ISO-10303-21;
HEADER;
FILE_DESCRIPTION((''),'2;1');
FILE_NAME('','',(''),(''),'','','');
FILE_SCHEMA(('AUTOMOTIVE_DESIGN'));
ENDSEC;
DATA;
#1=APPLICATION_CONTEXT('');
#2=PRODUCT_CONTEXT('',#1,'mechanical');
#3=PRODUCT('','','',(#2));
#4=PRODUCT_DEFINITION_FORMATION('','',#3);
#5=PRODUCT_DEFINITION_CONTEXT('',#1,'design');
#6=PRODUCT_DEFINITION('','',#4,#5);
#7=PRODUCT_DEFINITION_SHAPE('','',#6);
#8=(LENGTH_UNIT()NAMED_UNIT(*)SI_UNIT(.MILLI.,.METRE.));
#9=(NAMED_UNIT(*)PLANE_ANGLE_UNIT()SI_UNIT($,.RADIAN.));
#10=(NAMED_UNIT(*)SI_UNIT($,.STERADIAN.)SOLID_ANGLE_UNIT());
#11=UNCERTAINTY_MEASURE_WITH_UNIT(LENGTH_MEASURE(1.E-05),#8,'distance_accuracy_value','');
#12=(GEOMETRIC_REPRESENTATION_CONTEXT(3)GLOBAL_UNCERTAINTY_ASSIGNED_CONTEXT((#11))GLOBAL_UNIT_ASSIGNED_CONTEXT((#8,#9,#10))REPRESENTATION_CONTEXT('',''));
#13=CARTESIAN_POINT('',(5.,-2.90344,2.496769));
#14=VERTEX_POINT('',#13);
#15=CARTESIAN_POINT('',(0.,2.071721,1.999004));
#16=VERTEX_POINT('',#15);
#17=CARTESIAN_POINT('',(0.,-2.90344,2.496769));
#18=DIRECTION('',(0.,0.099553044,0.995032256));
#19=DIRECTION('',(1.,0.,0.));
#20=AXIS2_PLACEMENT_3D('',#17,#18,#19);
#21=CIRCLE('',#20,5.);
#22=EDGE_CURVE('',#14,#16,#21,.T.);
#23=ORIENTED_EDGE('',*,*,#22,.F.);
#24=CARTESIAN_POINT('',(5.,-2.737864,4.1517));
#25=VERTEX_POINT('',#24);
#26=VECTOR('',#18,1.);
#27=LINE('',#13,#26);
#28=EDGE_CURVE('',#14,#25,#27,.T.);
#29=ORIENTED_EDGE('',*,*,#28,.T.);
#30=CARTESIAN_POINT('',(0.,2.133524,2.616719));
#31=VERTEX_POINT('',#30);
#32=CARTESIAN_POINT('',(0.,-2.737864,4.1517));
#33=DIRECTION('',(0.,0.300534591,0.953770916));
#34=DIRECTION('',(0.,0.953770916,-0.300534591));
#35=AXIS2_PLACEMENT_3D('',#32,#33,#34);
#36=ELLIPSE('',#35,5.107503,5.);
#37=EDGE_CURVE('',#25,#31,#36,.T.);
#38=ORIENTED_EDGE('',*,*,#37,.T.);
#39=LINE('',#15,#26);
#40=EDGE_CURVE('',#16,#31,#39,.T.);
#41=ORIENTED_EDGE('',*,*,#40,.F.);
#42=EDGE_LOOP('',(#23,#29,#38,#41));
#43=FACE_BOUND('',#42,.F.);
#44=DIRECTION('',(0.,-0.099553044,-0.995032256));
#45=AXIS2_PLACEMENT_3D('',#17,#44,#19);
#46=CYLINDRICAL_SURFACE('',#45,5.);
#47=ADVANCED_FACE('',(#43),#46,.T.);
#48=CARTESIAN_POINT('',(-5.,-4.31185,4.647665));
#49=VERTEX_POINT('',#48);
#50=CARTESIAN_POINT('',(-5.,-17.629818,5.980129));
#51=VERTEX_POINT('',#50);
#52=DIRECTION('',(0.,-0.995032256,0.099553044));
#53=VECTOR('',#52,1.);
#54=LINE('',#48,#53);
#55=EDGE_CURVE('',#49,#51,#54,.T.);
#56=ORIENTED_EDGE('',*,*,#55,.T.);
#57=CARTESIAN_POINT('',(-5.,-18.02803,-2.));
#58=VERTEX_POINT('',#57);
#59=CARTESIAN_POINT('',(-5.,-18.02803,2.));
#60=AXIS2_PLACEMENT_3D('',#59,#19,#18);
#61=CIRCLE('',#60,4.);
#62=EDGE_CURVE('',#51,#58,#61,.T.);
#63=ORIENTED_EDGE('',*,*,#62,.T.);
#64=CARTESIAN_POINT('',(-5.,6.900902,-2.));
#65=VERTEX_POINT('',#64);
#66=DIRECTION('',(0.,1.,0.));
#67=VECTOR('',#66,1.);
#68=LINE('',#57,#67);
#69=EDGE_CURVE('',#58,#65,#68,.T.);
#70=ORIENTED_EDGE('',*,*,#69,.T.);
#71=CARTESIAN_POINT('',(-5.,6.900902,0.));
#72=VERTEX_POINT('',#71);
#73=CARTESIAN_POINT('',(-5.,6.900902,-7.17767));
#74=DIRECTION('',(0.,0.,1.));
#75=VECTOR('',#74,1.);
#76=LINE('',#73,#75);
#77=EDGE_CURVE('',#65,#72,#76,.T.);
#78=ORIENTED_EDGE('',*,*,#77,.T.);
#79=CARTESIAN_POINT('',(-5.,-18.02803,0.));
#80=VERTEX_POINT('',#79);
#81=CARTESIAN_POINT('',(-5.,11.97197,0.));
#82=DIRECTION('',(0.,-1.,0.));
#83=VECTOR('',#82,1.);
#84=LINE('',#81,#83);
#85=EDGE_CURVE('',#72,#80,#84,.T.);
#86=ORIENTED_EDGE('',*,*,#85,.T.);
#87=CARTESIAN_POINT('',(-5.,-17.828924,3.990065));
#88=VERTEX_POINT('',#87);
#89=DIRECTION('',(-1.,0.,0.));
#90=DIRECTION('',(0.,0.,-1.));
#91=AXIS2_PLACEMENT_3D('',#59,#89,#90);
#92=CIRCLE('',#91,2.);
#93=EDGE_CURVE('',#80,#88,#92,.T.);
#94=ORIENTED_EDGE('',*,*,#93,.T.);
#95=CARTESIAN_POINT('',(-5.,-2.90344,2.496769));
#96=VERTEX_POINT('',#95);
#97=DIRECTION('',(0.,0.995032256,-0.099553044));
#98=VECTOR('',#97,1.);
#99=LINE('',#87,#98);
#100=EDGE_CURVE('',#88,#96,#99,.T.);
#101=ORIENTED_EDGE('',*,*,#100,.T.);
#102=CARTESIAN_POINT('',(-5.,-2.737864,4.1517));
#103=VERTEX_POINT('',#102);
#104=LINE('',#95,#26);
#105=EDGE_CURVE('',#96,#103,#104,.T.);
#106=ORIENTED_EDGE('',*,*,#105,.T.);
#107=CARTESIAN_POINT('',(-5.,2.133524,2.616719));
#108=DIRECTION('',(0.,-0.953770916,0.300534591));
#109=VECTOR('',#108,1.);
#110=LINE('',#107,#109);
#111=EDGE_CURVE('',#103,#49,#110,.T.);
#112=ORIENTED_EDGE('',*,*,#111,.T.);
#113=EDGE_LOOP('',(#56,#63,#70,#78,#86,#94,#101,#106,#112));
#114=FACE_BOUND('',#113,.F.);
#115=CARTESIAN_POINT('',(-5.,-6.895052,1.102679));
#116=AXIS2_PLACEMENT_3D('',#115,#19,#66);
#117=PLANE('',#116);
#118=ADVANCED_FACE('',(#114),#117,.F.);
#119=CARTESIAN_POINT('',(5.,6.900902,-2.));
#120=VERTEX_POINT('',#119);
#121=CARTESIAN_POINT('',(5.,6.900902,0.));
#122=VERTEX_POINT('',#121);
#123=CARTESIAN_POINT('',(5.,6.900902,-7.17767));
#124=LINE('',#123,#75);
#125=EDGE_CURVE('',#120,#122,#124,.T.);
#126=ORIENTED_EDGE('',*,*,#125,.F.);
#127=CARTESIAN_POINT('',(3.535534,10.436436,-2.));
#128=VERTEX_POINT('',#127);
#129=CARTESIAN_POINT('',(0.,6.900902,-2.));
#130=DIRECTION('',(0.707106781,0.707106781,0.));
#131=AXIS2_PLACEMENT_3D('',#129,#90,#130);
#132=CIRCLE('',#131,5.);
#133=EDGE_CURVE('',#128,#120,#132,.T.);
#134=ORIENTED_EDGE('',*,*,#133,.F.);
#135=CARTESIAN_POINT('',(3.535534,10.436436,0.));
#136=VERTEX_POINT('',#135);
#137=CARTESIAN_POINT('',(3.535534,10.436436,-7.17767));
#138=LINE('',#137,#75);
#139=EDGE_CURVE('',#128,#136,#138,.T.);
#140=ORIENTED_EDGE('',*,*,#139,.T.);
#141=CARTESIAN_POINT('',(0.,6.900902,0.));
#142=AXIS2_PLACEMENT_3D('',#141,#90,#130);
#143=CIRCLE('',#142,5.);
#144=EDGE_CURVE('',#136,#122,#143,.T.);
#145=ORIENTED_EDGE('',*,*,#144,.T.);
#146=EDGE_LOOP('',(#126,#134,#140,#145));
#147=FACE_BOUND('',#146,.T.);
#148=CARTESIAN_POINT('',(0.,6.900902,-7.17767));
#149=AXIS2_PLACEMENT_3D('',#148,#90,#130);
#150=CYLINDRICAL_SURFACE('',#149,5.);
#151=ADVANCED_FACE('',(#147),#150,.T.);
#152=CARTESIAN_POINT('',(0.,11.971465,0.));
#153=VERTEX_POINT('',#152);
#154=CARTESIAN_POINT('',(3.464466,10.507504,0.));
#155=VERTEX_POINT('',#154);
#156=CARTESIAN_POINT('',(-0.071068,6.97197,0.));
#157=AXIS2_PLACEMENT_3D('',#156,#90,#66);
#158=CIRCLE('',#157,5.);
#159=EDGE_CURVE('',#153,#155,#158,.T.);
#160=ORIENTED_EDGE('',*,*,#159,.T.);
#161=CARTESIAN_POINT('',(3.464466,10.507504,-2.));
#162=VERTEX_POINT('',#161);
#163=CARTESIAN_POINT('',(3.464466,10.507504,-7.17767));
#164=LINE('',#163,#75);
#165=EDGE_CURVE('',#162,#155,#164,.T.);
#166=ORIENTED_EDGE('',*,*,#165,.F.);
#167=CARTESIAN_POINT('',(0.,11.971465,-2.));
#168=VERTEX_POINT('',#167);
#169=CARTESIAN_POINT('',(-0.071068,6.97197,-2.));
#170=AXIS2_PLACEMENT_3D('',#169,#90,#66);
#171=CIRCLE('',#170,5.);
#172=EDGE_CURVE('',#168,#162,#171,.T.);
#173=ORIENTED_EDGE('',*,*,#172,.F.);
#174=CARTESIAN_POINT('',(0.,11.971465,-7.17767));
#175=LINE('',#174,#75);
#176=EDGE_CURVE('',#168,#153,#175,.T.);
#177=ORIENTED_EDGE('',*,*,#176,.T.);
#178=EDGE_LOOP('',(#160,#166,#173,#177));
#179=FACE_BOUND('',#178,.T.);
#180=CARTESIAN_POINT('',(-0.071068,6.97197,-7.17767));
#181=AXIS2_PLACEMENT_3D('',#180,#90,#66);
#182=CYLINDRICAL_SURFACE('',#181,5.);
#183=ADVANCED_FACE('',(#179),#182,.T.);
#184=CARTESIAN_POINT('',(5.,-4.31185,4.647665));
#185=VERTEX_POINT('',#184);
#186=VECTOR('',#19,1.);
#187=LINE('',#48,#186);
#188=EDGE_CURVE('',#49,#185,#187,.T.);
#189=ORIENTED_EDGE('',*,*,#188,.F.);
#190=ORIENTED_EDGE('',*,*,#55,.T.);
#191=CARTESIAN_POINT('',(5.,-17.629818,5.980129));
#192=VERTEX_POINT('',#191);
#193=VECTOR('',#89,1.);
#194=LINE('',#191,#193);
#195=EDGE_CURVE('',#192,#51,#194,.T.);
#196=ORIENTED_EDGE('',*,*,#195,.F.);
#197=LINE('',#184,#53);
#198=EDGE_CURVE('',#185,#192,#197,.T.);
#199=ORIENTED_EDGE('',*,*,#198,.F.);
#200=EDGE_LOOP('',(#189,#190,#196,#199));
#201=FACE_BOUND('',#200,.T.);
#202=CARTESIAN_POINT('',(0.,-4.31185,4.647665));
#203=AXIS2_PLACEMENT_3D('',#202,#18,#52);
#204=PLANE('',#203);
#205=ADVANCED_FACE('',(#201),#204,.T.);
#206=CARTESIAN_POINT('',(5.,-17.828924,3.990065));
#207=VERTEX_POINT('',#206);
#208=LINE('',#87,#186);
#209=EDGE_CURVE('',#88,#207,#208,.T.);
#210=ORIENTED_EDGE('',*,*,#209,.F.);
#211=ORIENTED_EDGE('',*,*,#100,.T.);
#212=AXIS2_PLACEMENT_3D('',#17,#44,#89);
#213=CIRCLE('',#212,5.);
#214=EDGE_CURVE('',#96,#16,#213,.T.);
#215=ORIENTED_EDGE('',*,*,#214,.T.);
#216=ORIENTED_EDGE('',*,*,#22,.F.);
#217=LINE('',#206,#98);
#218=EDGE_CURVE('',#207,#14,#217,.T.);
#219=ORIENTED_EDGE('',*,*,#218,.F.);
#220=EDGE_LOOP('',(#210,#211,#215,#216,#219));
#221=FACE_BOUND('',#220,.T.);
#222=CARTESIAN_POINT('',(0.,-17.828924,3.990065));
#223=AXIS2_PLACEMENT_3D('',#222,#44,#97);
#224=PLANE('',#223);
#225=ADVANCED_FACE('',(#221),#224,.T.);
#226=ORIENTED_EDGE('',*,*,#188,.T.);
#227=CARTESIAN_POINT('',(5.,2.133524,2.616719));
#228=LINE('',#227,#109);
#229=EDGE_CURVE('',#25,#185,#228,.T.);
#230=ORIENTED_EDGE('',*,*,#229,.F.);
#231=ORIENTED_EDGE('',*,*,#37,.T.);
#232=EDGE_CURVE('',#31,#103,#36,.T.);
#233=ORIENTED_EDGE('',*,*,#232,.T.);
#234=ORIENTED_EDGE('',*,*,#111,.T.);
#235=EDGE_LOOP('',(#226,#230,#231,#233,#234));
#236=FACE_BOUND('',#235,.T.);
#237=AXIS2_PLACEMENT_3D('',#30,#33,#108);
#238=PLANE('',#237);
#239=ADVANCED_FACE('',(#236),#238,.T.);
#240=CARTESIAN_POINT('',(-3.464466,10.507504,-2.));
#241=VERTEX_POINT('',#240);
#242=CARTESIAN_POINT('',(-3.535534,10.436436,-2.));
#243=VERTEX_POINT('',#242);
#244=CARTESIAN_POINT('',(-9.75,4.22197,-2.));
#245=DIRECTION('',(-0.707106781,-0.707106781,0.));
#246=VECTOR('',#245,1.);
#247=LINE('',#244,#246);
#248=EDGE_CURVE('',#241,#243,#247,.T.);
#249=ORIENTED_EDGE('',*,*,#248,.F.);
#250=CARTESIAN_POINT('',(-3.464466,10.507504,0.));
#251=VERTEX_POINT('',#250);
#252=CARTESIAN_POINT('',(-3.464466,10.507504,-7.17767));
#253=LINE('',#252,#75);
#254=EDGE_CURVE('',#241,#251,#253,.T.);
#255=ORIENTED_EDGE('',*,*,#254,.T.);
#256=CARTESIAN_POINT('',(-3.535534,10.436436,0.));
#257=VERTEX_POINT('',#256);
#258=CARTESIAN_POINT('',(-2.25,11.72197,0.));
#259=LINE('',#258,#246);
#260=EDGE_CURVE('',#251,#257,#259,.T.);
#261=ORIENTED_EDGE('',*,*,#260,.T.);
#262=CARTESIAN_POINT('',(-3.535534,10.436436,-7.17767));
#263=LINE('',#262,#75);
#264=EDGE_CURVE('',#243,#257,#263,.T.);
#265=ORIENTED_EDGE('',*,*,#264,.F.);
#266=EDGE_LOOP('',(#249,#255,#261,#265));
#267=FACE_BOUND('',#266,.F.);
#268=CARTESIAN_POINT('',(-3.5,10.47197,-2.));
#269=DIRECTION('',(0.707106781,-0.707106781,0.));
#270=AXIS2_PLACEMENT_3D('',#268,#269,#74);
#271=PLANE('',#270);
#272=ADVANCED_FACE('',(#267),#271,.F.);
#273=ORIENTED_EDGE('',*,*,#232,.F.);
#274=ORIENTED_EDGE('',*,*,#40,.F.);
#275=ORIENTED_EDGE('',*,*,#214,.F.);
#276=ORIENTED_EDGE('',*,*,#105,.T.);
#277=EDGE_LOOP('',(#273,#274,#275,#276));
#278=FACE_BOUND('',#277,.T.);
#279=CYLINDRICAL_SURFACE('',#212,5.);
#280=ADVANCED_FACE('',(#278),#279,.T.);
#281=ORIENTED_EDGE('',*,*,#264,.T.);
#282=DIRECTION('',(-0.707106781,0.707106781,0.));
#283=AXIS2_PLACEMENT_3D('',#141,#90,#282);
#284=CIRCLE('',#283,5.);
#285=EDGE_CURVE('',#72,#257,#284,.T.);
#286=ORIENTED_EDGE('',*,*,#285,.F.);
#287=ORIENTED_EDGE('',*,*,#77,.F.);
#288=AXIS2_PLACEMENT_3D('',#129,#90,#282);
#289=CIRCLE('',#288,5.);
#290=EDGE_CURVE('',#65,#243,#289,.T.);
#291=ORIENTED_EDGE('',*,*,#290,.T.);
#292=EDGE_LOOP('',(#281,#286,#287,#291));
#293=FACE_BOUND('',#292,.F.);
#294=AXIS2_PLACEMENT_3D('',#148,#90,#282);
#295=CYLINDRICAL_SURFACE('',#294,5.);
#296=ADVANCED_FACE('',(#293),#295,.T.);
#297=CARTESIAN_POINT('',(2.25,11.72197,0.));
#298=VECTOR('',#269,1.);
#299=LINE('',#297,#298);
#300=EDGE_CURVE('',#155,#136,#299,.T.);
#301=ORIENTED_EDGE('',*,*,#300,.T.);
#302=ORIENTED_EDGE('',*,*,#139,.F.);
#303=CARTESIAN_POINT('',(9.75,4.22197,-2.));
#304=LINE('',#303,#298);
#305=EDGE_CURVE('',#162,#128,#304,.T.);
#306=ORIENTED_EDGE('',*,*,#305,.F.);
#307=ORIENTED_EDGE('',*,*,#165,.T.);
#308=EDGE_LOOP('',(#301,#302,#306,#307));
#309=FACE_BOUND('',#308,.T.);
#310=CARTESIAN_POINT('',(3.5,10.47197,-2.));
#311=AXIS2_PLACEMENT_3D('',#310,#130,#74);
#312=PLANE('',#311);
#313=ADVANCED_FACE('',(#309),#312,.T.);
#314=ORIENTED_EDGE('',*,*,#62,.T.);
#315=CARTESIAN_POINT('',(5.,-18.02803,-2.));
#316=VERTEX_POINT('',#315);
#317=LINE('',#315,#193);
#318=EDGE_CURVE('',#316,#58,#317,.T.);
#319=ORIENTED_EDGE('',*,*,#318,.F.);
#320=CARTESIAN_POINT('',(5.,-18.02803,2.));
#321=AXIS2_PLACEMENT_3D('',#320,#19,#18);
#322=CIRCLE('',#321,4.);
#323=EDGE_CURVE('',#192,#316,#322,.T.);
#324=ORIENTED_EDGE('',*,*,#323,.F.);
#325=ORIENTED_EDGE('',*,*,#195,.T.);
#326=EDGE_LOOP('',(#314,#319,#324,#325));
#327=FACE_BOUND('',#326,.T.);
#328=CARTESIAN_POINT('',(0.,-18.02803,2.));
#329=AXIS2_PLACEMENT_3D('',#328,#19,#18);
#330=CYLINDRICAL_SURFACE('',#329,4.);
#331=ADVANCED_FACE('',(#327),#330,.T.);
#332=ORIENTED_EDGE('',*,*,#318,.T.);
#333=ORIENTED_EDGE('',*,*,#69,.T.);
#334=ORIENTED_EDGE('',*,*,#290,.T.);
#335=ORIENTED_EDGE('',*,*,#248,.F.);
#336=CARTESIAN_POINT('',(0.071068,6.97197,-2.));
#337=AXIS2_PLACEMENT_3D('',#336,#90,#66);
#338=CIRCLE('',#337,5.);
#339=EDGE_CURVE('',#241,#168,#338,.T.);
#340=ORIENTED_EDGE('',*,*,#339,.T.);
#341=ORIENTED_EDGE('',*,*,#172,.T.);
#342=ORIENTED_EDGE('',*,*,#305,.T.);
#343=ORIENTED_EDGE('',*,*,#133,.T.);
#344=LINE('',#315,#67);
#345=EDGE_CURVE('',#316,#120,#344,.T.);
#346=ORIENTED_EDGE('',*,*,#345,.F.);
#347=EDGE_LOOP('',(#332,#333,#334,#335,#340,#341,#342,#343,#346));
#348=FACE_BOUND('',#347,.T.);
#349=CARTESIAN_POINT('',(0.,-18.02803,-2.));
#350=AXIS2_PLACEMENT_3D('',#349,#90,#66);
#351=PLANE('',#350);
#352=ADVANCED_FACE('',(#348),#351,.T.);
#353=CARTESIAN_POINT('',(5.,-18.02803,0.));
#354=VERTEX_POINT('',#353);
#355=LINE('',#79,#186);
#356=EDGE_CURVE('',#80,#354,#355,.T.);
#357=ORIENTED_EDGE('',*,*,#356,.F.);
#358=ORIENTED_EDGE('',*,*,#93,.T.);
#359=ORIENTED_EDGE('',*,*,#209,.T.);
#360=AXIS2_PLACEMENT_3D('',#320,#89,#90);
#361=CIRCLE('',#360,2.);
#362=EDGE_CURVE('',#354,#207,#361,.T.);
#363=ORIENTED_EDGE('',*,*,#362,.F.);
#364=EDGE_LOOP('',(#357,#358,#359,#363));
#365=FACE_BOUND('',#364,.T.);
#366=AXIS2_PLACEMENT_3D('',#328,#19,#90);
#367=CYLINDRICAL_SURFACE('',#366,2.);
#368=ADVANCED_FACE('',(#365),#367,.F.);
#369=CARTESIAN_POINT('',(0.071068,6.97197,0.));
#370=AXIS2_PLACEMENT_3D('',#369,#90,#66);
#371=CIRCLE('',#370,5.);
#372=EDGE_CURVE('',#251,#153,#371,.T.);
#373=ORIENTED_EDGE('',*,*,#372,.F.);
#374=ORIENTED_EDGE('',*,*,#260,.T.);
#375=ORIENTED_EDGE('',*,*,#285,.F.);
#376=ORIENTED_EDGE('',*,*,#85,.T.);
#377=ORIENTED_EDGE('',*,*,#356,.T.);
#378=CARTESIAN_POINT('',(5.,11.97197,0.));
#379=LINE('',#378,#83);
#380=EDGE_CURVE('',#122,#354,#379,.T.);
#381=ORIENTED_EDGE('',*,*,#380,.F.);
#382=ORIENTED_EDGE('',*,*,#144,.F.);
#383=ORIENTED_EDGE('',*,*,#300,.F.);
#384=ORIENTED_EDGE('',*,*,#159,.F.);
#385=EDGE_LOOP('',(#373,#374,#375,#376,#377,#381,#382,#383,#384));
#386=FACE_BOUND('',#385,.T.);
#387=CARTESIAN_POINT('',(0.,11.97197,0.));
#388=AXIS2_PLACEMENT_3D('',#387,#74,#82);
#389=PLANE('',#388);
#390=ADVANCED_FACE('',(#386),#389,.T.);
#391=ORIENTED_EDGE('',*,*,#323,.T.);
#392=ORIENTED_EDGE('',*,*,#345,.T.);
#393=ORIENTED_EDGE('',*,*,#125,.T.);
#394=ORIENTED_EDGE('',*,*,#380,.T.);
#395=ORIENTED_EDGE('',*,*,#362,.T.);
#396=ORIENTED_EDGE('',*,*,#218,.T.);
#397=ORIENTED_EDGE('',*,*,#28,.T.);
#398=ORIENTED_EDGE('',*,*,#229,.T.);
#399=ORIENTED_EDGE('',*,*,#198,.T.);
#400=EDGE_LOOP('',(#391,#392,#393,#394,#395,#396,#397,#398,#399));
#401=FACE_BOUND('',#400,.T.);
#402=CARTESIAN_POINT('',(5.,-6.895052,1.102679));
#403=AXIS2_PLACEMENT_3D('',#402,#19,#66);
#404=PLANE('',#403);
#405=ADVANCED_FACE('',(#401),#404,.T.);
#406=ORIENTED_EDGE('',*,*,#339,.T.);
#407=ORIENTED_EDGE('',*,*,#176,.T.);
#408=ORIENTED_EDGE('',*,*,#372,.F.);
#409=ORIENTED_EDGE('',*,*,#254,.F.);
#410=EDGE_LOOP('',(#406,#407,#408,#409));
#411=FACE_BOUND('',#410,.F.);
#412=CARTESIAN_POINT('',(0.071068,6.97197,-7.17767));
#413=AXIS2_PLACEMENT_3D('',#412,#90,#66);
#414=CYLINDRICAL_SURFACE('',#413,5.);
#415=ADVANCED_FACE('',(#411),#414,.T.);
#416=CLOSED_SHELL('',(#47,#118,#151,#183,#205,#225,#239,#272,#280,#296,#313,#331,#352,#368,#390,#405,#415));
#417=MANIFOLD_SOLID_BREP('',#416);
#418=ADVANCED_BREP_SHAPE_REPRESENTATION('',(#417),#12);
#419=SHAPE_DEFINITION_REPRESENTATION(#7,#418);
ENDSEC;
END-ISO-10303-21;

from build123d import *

# Parameters (mm, degrees)
F1_DEPTH    = 5
F2_SIZE     = 3
F3_T1_DEPTH = 12.3553390593
F3_T3_DEPTH = 13.1207993933


# Not quite as in the source:
# - a fillet or chamfer that OpenCascade refuses, or shapes differently, is made with other operations: its cross-section is extruded or revolved along the edge and cut away or added


with BuildPart() as f1:
    # F0 (on Right) → F1 (new body, symmetric)
    with BuildSketch(Plane.YZ):
        with BuildLine():
            Line((11.971969828, -2), (11.971969828, 0))
            Line((11.971969828, 0), (-18.028030172, 0))
            ThreePointArc((-18.028030172, 0), (-20.0255447559, 2.0996769133), (-17.828924084, 3.990064513))
            Line((-17.828924084, 3.990064513), (2.0717210456, 1.9990036332))
            Line((2.0717210456, 1.9990036332), (2.1335235149, 2.6167190544))
            Line((2.1335235149, 2.6167190544), (-4.3118495071, 4.6476653855))
            Line((-4.3118495071, 4.6476653855), (-17.629817996, 5.9801290259))
            ThreePointArc((-17.629817996, 5.9801290259), (-22.0230593398, 2.1993538266), (-18.028030172, -2))
            Line((-18.028030172, -2), (11.971969828, -2))
        make_face()
    extrude(amount=F1_DEPTH, both=True)

    # F2
    f2_edges = [f1.edges().sort_by_distance(p)[0] for p in [
        (5, 11.97197, -1),
        (-5, 11.97197, -1),
    ]]
    chamfer(f2_edges, length=F2_SIZE)

    # F3: fillet of radius 5 on 6 edges, made by hand

    # F3_s2 → F3_t1 (cut)
    with BuildSketch(Plane.XY.offset(-7.1776695297)):
        with BuildLine():
            ThreePointArc((-3.5355339059, 10.4364359221), (-4.6193976626, 8.814319178), (-5, 6.9009020161))
            Line((-5, 6.9009020161), (-5, 8.971969828))
            Line((-5, 8.971969828), (-3.5355339059, 10.4364359221))
        make_face()
        with BuildLine():
            ThreePointArc((0.0710678119, 11.971969828), (-1.84234935, 11.5913674906), (-3.4644660941, 10.5075037339))
            Line((-3.4644660941, 10.5075037339), (-2, 11.971969828))
            Line((-2, 11.971969828), (0.0710678119, 11.971969828))
        make_face()
        with BuildLine():
            ThreePointArc((-0.0710678119, 11.971969828), (1.84234935, 11.5913674906), (3.4644660941, 10.5075037339))
            Line((3.4644660941, 10.5075037339), (2, 11.971969828))
            Line((2, 11.971969828), (-0.0710678119, 11.971969828))
        make_face()
        with BuildLine():
            ThreePointArc((3.5355339059, 10.4364359221), (4.6193976626, 8.814319178), (5, 6.9009020161))
            Line((5, 6.9009020161), (5, 8.971969828))
            Line((5, 8.971969828), (3.5355339059, 10.4364359221))
        make_face()
    extrude(amount=F3_T1_DEPTH, mode=Mode.SUBTRACT)

    # F3_s4 → F3_t3 (cut)
    with BuildSketch(Plane(origin=(0, 0.2185507121, 2.1844134494), x_dir=(1, 0, 0), z_dir=(0, 0.099553044, 0.9950322565))):
        with BuildLine():
            ThreePointArc((-5, -3.1375776299), (-3.5355339059, 0.3979562761), (0, 1.8624223701))
            Line((0, 1.8624223701), (-5, 1.8624223701))
            Line((-5, 1.8624223701), (-5, -3.1375776299))
        make_face()
        with BuildLine():
            ThreePointArc((5, -3.1375776299), (3.5355339059, 0.3979562761), (0, 1.8624223701))
            Line((0, 1.8624223701), (5, 1.8624223701))
            Line((5, 1.8624223701), (5, -3.1375776299))
        make_face()
    extrude(amount=F3_T3_DEPTH, mode=Mode.SUBTRACT)


solid = f1.part
